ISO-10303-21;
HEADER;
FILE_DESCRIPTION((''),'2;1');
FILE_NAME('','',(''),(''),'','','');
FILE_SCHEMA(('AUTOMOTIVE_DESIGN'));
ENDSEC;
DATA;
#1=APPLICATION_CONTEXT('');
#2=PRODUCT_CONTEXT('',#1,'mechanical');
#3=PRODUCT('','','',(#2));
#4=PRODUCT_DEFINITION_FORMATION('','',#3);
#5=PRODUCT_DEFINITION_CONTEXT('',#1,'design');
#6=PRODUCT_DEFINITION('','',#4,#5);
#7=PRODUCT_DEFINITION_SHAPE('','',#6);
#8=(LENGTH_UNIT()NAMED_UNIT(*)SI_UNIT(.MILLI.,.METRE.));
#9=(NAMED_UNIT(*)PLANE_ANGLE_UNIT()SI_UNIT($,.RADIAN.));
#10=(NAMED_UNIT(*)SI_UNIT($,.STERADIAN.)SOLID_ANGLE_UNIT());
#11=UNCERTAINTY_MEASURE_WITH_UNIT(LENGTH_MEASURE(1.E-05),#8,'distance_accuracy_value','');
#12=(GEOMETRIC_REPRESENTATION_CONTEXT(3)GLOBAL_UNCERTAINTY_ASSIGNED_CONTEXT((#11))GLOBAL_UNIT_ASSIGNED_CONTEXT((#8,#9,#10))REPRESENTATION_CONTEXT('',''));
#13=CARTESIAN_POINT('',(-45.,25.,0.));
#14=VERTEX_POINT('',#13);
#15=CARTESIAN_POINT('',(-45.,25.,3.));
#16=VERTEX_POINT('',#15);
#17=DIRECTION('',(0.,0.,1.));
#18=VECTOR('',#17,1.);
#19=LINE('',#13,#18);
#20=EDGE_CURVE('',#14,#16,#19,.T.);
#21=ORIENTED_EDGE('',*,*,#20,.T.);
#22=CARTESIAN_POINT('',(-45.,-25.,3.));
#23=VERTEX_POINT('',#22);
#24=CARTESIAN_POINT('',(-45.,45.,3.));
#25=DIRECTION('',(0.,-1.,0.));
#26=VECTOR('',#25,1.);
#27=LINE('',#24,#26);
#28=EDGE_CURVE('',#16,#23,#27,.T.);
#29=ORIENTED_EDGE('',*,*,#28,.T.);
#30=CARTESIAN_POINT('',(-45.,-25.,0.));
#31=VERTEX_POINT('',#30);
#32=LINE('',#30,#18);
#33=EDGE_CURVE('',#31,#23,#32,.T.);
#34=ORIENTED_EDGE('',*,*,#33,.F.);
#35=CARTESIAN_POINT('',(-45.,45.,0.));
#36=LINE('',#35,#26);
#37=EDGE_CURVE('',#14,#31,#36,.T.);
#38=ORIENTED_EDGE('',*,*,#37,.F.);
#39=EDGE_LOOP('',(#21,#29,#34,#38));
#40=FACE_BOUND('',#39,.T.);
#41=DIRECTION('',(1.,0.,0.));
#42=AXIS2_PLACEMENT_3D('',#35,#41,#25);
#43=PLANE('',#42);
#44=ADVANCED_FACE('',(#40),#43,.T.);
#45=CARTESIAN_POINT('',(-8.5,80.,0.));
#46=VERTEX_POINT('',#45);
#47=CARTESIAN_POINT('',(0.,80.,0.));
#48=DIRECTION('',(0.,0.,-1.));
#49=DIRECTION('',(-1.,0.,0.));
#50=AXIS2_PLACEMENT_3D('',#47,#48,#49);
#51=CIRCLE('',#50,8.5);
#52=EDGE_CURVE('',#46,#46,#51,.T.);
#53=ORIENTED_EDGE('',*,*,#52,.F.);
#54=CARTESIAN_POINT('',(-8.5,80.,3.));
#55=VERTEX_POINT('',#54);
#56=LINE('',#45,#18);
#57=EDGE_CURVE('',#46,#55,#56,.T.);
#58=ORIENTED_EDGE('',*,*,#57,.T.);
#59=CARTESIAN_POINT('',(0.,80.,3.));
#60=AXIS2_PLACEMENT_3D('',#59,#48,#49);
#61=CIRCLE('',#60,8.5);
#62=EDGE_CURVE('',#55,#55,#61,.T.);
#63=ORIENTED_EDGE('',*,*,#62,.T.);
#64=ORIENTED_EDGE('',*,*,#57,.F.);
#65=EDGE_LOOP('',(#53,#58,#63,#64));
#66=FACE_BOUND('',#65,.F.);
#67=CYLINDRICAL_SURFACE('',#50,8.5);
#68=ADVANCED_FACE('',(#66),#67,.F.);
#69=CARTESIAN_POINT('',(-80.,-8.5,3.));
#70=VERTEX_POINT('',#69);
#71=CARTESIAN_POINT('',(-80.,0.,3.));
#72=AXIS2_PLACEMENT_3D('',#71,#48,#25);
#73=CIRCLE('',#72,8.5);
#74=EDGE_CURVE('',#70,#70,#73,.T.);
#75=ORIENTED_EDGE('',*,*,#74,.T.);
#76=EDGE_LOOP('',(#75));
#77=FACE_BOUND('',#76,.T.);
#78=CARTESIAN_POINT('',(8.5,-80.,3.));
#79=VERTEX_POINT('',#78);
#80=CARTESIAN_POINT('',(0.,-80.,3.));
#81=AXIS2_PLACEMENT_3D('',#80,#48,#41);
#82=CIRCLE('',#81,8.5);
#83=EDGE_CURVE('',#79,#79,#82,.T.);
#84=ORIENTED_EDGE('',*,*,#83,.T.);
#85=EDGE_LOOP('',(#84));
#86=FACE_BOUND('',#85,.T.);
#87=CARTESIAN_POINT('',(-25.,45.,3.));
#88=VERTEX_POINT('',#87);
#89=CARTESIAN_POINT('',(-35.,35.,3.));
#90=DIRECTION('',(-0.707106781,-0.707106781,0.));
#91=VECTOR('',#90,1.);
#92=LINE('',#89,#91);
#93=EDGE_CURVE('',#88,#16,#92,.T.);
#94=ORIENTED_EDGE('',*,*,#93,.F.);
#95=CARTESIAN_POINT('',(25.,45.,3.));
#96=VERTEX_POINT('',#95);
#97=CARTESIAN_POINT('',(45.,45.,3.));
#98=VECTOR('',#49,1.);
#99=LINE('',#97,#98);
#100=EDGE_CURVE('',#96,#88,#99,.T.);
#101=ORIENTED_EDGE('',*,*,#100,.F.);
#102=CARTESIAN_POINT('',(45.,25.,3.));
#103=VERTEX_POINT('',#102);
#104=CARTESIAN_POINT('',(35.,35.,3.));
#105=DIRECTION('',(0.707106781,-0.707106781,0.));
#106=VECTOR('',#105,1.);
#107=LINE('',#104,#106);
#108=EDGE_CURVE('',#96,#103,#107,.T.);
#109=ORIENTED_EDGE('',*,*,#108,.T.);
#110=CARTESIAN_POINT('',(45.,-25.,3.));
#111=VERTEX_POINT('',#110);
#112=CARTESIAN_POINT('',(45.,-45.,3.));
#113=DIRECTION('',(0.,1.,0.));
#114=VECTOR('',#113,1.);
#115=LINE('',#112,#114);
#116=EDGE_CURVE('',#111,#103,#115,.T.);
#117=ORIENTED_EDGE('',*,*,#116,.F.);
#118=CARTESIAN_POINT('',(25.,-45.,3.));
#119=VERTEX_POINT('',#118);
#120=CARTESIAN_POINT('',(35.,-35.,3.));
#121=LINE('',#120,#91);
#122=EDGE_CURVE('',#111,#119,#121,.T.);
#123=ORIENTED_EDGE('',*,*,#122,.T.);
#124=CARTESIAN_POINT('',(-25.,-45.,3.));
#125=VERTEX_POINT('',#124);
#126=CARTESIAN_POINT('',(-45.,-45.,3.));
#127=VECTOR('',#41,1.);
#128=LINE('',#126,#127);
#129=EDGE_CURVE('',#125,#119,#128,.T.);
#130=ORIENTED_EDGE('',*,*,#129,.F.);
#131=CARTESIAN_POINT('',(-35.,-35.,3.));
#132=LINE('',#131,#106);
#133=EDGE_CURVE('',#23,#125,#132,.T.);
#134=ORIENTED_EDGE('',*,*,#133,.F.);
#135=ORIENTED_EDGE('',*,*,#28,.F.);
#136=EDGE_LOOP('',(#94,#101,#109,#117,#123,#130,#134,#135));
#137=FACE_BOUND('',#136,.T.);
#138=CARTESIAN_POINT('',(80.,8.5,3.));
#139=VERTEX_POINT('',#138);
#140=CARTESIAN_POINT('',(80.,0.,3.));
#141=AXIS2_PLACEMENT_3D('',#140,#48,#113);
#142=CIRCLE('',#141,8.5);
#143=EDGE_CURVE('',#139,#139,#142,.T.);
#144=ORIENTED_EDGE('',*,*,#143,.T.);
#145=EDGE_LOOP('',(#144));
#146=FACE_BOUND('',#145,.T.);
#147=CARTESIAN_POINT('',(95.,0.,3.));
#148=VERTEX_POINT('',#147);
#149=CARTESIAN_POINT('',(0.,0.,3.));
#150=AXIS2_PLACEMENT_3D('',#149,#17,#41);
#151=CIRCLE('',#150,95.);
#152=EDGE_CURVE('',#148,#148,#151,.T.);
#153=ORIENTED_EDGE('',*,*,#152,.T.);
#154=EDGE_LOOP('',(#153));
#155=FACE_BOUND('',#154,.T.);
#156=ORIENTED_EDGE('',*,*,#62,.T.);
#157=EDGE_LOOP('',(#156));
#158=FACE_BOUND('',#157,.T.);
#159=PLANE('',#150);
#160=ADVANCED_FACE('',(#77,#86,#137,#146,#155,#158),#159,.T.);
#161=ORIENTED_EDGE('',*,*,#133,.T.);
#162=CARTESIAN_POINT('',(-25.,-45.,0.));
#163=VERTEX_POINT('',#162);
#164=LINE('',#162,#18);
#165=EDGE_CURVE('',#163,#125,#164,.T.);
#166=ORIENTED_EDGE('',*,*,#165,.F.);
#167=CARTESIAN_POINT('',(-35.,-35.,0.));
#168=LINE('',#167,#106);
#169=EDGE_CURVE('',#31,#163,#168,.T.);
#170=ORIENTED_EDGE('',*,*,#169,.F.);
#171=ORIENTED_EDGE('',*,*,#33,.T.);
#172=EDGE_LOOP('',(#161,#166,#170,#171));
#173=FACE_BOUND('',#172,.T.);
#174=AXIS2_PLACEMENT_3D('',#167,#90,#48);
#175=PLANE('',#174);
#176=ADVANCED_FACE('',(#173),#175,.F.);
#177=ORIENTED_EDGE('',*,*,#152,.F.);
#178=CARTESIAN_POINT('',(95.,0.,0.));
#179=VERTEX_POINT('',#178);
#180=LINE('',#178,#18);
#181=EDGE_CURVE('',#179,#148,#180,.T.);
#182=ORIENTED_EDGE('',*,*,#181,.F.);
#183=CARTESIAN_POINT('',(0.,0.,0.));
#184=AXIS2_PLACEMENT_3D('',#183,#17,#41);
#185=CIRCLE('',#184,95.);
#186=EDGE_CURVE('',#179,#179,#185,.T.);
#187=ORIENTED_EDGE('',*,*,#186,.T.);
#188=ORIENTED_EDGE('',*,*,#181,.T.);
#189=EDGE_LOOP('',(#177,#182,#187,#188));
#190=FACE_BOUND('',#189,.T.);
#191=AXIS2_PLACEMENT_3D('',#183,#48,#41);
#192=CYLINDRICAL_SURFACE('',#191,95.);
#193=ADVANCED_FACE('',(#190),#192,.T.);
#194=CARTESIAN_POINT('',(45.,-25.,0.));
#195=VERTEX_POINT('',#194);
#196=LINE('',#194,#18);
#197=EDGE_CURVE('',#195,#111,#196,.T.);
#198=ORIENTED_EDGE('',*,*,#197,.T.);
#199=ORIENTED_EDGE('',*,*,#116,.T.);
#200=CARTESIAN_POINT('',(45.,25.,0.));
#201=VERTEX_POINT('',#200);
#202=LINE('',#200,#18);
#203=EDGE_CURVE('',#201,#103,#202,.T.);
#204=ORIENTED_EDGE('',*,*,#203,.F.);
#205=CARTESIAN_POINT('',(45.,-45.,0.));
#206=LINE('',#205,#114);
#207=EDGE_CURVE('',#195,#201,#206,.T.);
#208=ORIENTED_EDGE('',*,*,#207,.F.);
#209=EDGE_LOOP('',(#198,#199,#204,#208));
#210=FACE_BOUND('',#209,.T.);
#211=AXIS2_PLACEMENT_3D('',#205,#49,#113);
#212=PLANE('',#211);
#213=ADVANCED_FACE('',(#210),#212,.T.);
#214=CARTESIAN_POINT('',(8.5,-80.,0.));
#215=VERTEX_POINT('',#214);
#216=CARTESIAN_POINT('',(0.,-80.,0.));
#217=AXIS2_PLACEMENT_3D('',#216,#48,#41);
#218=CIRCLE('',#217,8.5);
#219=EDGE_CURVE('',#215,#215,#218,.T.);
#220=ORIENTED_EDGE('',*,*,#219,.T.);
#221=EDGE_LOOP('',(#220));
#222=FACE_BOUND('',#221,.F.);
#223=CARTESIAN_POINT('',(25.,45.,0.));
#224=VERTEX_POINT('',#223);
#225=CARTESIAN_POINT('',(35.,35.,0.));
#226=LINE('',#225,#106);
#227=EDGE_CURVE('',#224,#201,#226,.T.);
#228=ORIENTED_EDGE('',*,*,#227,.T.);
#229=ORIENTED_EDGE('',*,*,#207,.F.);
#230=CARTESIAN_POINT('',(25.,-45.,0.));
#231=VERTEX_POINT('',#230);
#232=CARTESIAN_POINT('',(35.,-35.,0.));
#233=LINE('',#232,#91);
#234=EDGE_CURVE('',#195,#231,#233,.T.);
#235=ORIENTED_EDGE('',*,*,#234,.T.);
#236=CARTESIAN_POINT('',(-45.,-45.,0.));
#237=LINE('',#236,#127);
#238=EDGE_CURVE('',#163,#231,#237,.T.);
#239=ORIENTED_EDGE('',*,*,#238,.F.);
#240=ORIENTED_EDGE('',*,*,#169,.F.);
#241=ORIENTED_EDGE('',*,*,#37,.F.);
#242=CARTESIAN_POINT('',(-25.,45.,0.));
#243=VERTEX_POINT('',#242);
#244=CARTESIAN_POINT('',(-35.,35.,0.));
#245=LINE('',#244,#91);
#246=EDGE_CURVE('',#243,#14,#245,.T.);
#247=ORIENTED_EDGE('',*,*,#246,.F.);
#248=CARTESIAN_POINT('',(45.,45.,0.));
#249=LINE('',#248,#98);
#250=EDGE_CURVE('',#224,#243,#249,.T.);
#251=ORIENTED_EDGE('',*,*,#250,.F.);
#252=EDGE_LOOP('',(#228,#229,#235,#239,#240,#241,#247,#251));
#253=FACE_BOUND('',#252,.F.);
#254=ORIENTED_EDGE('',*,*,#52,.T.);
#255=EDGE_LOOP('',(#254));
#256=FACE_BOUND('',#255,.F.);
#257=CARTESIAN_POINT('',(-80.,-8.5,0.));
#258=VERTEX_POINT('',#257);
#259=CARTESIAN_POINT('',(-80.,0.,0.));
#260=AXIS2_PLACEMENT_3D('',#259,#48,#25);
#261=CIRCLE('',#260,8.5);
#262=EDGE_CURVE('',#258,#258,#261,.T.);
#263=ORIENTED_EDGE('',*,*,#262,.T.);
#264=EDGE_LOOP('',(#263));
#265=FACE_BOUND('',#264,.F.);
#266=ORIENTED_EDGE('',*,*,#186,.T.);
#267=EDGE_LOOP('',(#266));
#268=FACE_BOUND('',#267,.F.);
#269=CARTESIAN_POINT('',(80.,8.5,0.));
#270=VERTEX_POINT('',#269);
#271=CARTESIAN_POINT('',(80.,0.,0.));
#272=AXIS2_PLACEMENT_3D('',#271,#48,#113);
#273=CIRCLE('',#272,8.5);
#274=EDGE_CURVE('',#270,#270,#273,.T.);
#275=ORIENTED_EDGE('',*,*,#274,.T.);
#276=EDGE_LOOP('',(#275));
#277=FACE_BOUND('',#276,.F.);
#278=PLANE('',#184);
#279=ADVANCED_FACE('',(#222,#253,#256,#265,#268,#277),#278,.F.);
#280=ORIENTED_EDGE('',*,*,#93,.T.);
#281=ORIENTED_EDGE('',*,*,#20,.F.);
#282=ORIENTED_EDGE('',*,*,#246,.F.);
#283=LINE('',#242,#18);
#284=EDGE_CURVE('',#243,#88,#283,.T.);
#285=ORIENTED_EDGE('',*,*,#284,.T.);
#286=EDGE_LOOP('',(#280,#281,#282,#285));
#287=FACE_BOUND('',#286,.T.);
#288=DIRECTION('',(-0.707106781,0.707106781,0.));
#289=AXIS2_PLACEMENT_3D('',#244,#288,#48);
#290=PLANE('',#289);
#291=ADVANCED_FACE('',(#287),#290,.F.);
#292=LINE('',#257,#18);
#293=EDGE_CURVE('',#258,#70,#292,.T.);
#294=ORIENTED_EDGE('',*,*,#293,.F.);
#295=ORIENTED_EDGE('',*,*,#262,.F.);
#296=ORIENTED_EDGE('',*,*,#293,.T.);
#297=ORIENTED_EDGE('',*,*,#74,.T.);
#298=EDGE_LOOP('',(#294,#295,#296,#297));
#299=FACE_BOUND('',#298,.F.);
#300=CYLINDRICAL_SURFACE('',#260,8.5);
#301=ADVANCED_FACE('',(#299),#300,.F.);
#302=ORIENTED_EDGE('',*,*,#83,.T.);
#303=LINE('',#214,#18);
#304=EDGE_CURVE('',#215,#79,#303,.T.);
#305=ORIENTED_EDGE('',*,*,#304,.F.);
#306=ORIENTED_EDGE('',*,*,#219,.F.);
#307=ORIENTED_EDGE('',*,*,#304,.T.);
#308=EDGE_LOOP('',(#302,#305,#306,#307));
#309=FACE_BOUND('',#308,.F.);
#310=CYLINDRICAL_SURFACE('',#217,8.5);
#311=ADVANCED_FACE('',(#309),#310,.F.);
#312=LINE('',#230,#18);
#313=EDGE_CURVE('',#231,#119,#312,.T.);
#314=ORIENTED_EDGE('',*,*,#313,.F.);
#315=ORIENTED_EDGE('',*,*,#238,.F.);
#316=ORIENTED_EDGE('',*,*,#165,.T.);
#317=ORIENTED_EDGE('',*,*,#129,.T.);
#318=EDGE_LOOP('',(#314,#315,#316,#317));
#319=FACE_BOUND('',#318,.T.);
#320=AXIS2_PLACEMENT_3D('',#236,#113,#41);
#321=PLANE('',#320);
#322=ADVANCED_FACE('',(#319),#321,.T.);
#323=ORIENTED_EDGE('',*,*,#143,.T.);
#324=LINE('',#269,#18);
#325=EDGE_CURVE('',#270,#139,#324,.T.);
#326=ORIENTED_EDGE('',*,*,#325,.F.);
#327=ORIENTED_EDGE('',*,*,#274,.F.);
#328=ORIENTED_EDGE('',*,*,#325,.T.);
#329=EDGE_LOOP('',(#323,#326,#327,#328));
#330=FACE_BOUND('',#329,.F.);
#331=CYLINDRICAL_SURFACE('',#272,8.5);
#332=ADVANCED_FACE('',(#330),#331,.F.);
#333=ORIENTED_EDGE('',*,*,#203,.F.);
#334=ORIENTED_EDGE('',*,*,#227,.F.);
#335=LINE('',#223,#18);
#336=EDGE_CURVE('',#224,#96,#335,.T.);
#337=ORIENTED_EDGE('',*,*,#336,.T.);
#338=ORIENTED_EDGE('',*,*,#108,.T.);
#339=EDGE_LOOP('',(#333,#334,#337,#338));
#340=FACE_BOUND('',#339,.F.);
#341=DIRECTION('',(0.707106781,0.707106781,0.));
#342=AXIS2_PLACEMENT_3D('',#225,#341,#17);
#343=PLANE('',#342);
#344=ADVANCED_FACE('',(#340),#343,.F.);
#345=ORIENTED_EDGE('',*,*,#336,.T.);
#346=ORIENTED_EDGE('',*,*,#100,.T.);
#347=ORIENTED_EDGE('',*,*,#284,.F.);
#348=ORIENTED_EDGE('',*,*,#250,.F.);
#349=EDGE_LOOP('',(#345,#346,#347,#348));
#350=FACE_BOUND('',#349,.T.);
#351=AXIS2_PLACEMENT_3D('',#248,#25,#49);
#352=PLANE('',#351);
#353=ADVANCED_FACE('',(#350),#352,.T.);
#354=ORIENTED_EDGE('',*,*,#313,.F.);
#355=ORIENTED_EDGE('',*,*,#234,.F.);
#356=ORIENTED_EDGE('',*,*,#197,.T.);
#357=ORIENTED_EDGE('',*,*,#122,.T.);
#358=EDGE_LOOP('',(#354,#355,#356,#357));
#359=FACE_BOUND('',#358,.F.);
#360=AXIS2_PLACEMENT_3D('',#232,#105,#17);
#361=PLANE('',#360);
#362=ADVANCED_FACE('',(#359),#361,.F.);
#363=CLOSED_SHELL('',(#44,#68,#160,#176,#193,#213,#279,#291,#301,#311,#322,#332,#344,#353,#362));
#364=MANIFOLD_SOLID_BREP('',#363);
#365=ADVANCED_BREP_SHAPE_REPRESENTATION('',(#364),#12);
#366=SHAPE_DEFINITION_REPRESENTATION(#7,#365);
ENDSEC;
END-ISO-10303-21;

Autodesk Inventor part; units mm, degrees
ref_plane "YZ Plane" through (0, 0, 0) normal (1, 0, 0) x (0, 1, 0)
ref_plane "XZ Plane" through (0, 0, 0) normal (0, 1, 0) x (-1, 0, 0)
ref_plane "XY Plane" through (0, 0, 0) normal (0, 0, 1) x (1, 0, 0)
sketch "Sketch1" plane through (0, 0, 0) normal (0, 0, 1) x (1, 0, 0)
  circle A0 centre (0, 0) radius 95
  line L0 (45, 45) -> (-45, 45)
  line L1 (-45, 45) -> (-45, -45)
  line L2 (-45, -45) -> (45, -45)
  line L3 (45, -45) -> (45, 45)
  line L4 (45, 45) -> (-45, -45) construction
  line L5 (-45, 45) -> (45, -45) construction
  dimension "d157" = 190
  dimension "d158" = 90
  dimension "d159" = 90
extrude "Plate5" add sketch "Sketch1" along normal blind 3
sketch "Sketch7" plane through (0, 0, 0) normal (0, 0, -1) x (-1, 0, 0)
  circle A0 centre (0, 80) radius 8.5
  point P0 (0, 0)
  dimension "d160" = 17
  dimension "d161" = 80
extrude "Cut1" cut sketch "Sketch7" against normal blind 3
pattern_circular "Circular Pattern1" count 4 over 360 about axis through (0, 0, -10) along (0, 0, 1) of "Cut1"
chamfer "Corner Chamfer2" distance 20 angle 45 4 edges at (-45, -45, 1.5) (45, -45, 1.5) (-45, 45, 1.5) (45, 45, 1.5)
properties part number "TZS 1651 FDS MAIN  FLANGE" material "Stainless Steel"
